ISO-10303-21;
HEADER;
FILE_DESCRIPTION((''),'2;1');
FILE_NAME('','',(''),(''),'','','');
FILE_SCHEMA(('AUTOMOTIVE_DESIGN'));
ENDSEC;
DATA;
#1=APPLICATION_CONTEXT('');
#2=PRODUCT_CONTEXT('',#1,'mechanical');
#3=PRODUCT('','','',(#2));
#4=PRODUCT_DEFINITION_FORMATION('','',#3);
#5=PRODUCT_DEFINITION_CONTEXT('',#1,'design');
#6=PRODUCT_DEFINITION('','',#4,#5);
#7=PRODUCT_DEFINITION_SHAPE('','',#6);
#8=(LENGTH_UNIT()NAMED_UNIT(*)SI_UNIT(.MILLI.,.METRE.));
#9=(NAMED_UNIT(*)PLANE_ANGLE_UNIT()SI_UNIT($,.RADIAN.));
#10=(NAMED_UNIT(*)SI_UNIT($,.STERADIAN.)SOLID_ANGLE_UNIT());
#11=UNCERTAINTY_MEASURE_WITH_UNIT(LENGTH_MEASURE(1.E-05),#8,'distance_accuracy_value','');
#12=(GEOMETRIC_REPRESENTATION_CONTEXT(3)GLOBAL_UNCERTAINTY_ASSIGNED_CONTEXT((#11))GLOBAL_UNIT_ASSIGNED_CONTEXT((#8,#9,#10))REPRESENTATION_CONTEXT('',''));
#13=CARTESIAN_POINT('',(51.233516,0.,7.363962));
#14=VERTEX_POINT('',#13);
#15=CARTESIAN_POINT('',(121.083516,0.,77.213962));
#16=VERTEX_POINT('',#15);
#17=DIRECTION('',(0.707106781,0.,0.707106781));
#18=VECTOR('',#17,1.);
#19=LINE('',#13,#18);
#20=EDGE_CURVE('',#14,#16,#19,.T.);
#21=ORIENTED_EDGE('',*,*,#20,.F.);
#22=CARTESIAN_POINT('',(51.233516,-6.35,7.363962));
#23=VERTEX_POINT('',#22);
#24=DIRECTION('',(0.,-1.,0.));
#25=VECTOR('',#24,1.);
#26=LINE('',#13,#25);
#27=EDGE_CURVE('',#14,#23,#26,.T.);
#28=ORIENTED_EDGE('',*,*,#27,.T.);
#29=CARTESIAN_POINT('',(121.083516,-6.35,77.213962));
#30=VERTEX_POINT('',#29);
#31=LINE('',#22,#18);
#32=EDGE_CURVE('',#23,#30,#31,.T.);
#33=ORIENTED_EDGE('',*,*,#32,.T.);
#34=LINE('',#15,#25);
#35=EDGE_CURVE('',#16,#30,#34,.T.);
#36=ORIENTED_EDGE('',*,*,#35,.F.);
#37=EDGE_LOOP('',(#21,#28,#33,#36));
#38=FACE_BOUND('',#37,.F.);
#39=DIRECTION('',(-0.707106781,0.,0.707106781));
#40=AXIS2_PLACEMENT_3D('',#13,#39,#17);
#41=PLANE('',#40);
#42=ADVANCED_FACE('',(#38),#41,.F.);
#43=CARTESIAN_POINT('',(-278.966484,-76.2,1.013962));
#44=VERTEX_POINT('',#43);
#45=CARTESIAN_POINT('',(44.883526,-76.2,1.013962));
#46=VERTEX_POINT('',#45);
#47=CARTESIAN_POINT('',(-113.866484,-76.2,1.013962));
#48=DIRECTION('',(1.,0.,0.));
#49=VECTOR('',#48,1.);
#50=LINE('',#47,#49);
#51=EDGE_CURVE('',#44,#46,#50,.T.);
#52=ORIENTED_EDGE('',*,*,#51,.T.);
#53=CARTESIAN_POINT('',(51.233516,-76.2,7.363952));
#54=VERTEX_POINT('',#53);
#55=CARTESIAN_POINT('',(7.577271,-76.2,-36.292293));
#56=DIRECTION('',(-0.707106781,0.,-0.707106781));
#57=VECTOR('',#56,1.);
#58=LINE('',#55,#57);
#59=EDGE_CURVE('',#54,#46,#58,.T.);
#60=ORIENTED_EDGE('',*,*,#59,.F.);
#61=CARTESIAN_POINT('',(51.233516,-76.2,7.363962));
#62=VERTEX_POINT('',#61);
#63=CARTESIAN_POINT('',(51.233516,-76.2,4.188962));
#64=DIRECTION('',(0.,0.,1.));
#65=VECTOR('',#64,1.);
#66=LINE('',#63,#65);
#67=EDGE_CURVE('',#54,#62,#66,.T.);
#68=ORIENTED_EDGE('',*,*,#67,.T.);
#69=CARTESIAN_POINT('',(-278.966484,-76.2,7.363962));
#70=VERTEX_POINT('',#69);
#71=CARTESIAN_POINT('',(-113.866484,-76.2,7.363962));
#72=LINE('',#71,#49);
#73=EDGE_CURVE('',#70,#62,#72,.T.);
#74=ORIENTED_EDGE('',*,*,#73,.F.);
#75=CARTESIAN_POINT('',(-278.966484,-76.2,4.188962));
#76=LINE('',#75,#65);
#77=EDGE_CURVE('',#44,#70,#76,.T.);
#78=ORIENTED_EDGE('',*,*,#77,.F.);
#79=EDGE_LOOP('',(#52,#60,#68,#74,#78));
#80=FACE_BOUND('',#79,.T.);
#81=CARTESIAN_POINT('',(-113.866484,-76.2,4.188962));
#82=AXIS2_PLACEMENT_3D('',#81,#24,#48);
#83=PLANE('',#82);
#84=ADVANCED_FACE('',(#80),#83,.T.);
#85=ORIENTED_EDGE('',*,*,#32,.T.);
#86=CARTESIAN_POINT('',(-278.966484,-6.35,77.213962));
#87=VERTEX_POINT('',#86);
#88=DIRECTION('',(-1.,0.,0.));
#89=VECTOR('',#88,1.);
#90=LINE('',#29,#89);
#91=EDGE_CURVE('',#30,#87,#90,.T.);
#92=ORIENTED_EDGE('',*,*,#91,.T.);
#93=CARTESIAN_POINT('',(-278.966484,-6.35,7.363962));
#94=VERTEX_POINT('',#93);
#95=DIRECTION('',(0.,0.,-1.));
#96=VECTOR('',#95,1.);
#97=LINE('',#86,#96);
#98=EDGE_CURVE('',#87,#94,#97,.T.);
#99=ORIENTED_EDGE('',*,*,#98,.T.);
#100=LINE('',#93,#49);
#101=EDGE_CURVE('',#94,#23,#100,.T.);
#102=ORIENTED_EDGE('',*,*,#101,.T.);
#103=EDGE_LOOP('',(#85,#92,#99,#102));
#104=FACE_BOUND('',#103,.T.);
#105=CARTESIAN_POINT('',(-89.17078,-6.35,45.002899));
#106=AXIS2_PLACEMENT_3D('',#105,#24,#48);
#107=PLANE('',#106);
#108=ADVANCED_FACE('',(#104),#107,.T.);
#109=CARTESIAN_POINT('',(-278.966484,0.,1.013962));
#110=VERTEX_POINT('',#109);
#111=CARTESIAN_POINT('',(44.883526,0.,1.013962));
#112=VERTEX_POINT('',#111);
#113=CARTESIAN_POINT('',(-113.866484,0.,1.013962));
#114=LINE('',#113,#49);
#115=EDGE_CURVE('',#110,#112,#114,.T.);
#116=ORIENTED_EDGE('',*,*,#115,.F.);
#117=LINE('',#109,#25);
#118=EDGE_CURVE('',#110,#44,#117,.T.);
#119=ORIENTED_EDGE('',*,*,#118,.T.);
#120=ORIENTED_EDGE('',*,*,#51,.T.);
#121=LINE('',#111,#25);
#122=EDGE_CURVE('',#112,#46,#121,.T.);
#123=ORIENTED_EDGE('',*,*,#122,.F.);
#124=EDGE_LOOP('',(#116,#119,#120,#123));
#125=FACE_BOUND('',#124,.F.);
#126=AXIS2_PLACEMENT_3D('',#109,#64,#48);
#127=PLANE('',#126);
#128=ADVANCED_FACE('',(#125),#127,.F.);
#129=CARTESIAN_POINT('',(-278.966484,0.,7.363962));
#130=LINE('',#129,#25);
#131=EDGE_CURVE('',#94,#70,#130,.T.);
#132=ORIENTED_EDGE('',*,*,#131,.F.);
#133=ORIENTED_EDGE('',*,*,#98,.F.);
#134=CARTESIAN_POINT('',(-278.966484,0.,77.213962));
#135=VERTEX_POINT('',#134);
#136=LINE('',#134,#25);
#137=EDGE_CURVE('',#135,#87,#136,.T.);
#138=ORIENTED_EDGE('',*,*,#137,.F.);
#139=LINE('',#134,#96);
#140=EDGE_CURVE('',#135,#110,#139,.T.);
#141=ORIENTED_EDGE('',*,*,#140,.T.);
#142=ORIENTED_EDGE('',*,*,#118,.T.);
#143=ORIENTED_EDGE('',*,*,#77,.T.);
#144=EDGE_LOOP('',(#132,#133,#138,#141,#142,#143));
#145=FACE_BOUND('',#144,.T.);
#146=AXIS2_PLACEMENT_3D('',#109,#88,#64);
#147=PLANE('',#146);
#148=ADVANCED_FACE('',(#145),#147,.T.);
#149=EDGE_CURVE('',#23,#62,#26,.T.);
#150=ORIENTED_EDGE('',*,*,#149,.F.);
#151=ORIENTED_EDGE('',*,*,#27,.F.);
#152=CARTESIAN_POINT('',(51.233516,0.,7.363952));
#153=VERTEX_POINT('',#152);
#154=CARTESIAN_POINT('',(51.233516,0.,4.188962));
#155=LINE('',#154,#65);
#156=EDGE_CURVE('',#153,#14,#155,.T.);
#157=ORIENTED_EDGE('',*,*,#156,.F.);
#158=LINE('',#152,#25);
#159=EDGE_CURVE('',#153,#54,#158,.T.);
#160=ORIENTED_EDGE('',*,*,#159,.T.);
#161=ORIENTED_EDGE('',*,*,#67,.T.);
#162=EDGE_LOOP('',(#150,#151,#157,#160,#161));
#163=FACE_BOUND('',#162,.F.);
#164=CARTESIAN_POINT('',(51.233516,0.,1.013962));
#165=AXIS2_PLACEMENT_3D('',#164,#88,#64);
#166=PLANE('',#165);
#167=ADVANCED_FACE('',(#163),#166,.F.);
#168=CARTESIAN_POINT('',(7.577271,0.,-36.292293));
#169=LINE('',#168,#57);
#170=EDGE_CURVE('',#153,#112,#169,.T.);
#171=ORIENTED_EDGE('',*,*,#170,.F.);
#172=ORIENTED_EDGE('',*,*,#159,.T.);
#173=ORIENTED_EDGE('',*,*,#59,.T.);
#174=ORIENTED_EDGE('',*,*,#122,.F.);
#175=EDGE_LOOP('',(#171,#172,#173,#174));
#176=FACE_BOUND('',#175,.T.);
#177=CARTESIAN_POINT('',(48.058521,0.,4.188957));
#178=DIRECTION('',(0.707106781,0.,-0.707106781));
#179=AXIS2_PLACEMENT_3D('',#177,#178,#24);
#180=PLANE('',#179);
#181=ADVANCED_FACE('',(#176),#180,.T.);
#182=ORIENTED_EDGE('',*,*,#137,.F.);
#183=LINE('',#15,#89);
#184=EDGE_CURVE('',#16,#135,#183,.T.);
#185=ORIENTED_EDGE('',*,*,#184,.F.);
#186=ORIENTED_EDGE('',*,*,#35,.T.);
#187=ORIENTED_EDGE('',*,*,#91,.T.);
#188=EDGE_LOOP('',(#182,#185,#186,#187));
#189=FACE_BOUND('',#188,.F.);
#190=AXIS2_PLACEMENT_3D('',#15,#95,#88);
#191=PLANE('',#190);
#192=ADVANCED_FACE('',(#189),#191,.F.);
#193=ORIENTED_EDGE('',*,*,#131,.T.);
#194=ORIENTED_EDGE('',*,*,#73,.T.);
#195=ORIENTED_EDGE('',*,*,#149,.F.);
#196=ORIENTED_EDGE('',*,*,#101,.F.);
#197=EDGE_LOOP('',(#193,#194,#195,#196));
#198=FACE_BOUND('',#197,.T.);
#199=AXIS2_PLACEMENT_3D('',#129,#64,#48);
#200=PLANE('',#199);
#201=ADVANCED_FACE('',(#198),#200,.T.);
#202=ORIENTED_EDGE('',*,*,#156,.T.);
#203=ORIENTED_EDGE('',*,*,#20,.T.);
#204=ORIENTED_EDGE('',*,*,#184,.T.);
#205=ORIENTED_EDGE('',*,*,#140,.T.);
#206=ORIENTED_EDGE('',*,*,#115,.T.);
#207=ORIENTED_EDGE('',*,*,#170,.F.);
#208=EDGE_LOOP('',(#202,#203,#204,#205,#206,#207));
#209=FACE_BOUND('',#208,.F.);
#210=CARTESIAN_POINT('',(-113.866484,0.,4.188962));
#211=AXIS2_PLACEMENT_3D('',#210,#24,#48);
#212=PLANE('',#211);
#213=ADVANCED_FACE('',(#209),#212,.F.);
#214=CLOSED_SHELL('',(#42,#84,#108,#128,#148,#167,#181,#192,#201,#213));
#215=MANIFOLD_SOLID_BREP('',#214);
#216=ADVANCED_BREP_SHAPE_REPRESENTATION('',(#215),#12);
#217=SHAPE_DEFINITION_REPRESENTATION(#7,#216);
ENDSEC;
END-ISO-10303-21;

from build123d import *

# Parameters (mm, degrees)
F1_DEPTH = 6.35
F0_W     = 330.2
F0_H     = 6.35
F2_DEPTH = 76.2
F3_SIZE  = 6.34999


# Not quite as in the source:
# - a fillet or chamfer is up to 0.001 mm smaller than in the source, because OpenCascade refuses the exact size


with BuildPart() as f1:
    # F0 (on Front) → F1 (new body)
    with BuildSketch(Plane.XZ):
        Polygon((-278.9664838675, 77.2139622109), (-278.9664838675, 7.3639622109), (51.2335161325, 7.3639622109), (121.0835161325, 77.2139622109), align=None)
    extrude(amount=F1_DEPTH)

    # F0 (on Front) → F2 (join)
    with BuildSketch(Plane.XZ):
        with Locations((-113.8664838675, 4.1889622109)):
            Rectangle(F0_W, F0_H)
    extrude(amount=F2_DEPTH)

    # F3 (size 6.35 in the source; OpenCascade refuses exactly that, so slightly less here)
    f3_edges = [f1.edges().sort_by_distance(p)[0] for p in [
        (51.233516, -38.1, 1.013962),
    ]]
    chamfer(f3_edges, length=F3_SIZE)


solid = f1.part
